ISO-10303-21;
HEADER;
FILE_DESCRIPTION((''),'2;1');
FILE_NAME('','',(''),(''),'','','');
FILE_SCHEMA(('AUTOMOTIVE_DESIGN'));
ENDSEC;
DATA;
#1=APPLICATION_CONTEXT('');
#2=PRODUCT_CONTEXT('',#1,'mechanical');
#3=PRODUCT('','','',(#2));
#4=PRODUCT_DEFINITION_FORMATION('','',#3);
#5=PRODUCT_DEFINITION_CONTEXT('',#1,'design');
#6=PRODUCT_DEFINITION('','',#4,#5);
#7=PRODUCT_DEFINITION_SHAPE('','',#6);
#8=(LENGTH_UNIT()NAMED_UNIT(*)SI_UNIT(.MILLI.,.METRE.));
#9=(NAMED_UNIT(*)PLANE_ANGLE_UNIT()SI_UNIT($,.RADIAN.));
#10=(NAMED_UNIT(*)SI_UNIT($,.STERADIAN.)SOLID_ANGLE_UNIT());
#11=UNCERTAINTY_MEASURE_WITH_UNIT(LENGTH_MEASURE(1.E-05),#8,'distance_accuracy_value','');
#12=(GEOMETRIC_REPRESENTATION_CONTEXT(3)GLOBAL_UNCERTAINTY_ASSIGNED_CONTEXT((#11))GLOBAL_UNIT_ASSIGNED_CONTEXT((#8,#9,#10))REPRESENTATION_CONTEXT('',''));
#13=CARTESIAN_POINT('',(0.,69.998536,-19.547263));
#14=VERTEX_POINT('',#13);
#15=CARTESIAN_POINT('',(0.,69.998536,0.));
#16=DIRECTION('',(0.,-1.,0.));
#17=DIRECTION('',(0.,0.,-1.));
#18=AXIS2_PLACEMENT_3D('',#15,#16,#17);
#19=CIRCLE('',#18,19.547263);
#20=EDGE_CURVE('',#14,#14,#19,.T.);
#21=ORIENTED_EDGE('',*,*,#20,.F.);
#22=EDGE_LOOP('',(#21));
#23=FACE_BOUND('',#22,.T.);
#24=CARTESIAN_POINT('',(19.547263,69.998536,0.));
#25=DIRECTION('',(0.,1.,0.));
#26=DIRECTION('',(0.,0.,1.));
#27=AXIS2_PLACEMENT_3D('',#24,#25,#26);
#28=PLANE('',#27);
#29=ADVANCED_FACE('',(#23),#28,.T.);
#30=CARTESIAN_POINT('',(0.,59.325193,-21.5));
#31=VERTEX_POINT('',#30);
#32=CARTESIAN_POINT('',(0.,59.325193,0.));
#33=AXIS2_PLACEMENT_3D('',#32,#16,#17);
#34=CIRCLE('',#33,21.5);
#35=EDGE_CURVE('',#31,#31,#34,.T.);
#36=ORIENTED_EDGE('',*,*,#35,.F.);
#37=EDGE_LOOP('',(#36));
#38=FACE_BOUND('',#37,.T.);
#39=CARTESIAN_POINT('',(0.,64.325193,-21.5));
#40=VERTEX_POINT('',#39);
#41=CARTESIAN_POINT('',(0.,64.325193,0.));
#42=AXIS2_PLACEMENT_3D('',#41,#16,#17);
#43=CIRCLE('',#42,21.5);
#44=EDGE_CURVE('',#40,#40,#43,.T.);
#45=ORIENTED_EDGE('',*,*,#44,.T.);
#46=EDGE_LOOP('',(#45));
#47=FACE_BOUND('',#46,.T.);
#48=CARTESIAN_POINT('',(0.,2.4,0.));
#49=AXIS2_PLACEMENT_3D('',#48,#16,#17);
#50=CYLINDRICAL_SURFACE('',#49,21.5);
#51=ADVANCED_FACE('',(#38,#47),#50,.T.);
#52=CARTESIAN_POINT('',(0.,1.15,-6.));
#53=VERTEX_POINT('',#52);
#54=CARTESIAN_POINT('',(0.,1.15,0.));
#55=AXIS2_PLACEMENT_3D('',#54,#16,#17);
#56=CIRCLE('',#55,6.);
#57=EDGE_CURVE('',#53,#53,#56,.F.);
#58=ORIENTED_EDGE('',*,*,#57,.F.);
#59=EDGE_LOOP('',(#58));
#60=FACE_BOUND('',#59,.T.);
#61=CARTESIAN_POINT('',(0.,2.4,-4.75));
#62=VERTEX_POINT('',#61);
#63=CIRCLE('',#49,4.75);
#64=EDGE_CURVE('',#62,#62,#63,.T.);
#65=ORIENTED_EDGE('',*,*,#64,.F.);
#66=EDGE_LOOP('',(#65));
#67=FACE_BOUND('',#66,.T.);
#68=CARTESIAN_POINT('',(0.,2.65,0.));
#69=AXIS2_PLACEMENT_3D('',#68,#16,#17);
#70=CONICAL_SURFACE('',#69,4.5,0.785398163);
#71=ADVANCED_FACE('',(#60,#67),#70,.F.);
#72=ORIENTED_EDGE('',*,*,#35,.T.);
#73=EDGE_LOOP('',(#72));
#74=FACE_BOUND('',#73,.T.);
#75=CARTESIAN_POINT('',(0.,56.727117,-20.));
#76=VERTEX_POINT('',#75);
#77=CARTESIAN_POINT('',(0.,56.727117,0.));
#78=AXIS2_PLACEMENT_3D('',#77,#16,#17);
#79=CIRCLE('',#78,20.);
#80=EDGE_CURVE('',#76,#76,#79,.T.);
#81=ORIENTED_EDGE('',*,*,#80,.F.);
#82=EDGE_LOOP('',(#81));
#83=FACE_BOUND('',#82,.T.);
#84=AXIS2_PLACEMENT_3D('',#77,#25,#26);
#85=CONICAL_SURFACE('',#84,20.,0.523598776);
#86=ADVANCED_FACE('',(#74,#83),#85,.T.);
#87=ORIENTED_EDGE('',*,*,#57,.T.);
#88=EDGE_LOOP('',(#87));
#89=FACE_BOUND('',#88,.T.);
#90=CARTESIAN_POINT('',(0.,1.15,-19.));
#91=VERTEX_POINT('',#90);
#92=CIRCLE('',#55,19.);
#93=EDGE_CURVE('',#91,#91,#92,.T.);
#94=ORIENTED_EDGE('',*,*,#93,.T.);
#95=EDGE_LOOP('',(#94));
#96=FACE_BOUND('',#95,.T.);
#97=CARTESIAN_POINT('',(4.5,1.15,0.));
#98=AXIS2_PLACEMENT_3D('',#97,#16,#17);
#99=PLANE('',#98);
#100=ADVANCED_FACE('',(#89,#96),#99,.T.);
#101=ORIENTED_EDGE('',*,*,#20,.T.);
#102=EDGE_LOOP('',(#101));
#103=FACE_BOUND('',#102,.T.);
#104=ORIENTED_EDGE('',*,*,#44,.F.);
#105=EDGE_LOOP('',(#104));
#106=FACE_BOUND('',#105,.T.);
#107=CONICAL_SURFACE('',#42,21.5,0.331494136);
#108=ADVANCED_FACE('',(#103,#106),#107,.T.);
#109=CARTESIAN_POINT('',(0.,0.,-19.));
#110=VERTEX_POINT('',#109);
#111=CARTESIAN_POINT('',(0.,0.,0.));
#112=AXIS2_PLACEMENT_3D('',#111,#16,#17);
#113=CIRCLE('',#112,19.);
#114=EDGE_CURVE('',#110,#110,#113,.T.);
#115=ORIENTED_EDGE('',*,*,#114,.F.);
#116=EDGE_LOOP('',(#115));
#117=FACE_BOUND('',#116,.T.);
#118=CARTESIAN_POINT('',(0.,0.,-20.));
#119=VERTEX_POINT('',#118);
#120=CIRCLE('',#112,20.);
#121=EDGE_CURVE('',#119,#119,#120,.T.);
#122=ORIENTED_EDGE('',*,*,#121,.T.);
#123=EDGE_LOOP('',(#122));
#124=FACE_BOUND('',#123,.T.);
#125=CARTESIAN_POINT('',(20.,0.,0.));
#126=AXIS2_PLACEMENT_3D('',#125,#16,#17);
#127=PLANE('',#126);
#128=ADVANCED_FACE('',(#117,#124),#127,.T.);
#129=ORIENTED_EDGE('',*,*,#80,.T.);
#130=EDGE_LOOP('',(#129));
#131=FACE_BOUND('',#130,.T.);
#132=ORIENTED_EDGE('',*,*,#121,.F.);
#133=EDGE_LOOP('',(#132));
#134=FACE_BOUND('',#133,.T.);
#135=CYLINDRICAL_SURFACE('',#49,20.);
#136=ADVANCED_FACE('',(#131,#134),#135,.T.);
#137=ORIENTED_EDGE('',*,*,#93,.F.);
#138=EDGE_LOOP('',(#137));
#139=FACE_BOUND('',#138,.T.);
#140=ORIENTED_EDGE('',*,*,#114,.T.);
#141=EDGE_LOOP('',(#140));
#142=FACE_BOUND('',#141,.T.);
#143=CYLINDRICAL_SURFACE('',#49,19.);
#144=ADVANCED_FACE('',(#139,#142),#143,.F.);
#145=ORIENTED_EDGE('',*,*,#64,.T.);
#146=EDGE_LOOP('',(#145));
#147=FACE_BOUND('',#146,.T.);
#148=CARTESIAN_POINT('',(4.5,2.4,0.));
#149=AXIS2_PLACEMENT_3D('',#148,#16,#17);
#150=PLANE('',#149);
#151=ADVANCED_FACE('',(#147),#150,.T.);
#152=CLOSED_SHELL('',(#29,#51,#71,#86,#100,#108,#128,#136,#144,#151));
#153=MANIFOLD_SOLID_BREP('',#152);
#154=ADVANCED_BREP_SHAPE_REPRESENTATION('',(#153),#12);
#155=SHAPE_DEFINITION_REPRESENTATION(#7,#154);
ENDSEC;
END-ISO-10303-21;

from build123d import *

# Parameters (mm, degrees)
FILLET1_SIZE = 1.5


with BuildPart() as part:
    # Sketch1 → Revolve1 (revolve)
    with BuildSketch(Plane.XY, mode=Mode.PRIVATE) as revolve1_sk:
        Polygon((20, 0), (20, 56.727116956), (21.5, 59.325193167), (21.5, 64.325193167), (19.547262907, 69.998535907), (0, 69.998535907), (0, 2.4), (4.5, 2.4), (4.5, 1.15), (19, 1.15), (19, 0), align=None)
    revolve(revolve1_sk.sketch.rotate(Axis((0, 2.4, 0), (0, 1, 0)), 90), axis=Axis((0, 2.4, 0), (0, 1, 0)))

    # Fillet1
    # the kernel refuses this chamfer: 1.5 mm, written as the material it takes off along each edge
    with BuildSketch(Plane(origin=(0, 1.15, 0), x_dir=(0, 0, -1), z_dir=(1, 0, 0))) as fillet1_piece_1_section:
        Polygon((4.5, FILLET1_SIZE), (4.5 + FILLET1_SIZE, 0), (4.5, 0), align=None)
    fillet1_piece_1 = revolve(axis=Axis((0, 1.15, 0), (0, 1, 0)), mode=Mode.PRIVATE)
    fillet1_piece_1 = split(fillet1_piece_1, bisect_by=Plane(origin=(0, 2.4, 5.37255081), z_dir=(0, -1, 0)), keep=Keep.TOP, mode=Mode.PRIVATE)
    add(fillet1_piece_1, mode=Mode.SUBTRACT)


solid = part.part
